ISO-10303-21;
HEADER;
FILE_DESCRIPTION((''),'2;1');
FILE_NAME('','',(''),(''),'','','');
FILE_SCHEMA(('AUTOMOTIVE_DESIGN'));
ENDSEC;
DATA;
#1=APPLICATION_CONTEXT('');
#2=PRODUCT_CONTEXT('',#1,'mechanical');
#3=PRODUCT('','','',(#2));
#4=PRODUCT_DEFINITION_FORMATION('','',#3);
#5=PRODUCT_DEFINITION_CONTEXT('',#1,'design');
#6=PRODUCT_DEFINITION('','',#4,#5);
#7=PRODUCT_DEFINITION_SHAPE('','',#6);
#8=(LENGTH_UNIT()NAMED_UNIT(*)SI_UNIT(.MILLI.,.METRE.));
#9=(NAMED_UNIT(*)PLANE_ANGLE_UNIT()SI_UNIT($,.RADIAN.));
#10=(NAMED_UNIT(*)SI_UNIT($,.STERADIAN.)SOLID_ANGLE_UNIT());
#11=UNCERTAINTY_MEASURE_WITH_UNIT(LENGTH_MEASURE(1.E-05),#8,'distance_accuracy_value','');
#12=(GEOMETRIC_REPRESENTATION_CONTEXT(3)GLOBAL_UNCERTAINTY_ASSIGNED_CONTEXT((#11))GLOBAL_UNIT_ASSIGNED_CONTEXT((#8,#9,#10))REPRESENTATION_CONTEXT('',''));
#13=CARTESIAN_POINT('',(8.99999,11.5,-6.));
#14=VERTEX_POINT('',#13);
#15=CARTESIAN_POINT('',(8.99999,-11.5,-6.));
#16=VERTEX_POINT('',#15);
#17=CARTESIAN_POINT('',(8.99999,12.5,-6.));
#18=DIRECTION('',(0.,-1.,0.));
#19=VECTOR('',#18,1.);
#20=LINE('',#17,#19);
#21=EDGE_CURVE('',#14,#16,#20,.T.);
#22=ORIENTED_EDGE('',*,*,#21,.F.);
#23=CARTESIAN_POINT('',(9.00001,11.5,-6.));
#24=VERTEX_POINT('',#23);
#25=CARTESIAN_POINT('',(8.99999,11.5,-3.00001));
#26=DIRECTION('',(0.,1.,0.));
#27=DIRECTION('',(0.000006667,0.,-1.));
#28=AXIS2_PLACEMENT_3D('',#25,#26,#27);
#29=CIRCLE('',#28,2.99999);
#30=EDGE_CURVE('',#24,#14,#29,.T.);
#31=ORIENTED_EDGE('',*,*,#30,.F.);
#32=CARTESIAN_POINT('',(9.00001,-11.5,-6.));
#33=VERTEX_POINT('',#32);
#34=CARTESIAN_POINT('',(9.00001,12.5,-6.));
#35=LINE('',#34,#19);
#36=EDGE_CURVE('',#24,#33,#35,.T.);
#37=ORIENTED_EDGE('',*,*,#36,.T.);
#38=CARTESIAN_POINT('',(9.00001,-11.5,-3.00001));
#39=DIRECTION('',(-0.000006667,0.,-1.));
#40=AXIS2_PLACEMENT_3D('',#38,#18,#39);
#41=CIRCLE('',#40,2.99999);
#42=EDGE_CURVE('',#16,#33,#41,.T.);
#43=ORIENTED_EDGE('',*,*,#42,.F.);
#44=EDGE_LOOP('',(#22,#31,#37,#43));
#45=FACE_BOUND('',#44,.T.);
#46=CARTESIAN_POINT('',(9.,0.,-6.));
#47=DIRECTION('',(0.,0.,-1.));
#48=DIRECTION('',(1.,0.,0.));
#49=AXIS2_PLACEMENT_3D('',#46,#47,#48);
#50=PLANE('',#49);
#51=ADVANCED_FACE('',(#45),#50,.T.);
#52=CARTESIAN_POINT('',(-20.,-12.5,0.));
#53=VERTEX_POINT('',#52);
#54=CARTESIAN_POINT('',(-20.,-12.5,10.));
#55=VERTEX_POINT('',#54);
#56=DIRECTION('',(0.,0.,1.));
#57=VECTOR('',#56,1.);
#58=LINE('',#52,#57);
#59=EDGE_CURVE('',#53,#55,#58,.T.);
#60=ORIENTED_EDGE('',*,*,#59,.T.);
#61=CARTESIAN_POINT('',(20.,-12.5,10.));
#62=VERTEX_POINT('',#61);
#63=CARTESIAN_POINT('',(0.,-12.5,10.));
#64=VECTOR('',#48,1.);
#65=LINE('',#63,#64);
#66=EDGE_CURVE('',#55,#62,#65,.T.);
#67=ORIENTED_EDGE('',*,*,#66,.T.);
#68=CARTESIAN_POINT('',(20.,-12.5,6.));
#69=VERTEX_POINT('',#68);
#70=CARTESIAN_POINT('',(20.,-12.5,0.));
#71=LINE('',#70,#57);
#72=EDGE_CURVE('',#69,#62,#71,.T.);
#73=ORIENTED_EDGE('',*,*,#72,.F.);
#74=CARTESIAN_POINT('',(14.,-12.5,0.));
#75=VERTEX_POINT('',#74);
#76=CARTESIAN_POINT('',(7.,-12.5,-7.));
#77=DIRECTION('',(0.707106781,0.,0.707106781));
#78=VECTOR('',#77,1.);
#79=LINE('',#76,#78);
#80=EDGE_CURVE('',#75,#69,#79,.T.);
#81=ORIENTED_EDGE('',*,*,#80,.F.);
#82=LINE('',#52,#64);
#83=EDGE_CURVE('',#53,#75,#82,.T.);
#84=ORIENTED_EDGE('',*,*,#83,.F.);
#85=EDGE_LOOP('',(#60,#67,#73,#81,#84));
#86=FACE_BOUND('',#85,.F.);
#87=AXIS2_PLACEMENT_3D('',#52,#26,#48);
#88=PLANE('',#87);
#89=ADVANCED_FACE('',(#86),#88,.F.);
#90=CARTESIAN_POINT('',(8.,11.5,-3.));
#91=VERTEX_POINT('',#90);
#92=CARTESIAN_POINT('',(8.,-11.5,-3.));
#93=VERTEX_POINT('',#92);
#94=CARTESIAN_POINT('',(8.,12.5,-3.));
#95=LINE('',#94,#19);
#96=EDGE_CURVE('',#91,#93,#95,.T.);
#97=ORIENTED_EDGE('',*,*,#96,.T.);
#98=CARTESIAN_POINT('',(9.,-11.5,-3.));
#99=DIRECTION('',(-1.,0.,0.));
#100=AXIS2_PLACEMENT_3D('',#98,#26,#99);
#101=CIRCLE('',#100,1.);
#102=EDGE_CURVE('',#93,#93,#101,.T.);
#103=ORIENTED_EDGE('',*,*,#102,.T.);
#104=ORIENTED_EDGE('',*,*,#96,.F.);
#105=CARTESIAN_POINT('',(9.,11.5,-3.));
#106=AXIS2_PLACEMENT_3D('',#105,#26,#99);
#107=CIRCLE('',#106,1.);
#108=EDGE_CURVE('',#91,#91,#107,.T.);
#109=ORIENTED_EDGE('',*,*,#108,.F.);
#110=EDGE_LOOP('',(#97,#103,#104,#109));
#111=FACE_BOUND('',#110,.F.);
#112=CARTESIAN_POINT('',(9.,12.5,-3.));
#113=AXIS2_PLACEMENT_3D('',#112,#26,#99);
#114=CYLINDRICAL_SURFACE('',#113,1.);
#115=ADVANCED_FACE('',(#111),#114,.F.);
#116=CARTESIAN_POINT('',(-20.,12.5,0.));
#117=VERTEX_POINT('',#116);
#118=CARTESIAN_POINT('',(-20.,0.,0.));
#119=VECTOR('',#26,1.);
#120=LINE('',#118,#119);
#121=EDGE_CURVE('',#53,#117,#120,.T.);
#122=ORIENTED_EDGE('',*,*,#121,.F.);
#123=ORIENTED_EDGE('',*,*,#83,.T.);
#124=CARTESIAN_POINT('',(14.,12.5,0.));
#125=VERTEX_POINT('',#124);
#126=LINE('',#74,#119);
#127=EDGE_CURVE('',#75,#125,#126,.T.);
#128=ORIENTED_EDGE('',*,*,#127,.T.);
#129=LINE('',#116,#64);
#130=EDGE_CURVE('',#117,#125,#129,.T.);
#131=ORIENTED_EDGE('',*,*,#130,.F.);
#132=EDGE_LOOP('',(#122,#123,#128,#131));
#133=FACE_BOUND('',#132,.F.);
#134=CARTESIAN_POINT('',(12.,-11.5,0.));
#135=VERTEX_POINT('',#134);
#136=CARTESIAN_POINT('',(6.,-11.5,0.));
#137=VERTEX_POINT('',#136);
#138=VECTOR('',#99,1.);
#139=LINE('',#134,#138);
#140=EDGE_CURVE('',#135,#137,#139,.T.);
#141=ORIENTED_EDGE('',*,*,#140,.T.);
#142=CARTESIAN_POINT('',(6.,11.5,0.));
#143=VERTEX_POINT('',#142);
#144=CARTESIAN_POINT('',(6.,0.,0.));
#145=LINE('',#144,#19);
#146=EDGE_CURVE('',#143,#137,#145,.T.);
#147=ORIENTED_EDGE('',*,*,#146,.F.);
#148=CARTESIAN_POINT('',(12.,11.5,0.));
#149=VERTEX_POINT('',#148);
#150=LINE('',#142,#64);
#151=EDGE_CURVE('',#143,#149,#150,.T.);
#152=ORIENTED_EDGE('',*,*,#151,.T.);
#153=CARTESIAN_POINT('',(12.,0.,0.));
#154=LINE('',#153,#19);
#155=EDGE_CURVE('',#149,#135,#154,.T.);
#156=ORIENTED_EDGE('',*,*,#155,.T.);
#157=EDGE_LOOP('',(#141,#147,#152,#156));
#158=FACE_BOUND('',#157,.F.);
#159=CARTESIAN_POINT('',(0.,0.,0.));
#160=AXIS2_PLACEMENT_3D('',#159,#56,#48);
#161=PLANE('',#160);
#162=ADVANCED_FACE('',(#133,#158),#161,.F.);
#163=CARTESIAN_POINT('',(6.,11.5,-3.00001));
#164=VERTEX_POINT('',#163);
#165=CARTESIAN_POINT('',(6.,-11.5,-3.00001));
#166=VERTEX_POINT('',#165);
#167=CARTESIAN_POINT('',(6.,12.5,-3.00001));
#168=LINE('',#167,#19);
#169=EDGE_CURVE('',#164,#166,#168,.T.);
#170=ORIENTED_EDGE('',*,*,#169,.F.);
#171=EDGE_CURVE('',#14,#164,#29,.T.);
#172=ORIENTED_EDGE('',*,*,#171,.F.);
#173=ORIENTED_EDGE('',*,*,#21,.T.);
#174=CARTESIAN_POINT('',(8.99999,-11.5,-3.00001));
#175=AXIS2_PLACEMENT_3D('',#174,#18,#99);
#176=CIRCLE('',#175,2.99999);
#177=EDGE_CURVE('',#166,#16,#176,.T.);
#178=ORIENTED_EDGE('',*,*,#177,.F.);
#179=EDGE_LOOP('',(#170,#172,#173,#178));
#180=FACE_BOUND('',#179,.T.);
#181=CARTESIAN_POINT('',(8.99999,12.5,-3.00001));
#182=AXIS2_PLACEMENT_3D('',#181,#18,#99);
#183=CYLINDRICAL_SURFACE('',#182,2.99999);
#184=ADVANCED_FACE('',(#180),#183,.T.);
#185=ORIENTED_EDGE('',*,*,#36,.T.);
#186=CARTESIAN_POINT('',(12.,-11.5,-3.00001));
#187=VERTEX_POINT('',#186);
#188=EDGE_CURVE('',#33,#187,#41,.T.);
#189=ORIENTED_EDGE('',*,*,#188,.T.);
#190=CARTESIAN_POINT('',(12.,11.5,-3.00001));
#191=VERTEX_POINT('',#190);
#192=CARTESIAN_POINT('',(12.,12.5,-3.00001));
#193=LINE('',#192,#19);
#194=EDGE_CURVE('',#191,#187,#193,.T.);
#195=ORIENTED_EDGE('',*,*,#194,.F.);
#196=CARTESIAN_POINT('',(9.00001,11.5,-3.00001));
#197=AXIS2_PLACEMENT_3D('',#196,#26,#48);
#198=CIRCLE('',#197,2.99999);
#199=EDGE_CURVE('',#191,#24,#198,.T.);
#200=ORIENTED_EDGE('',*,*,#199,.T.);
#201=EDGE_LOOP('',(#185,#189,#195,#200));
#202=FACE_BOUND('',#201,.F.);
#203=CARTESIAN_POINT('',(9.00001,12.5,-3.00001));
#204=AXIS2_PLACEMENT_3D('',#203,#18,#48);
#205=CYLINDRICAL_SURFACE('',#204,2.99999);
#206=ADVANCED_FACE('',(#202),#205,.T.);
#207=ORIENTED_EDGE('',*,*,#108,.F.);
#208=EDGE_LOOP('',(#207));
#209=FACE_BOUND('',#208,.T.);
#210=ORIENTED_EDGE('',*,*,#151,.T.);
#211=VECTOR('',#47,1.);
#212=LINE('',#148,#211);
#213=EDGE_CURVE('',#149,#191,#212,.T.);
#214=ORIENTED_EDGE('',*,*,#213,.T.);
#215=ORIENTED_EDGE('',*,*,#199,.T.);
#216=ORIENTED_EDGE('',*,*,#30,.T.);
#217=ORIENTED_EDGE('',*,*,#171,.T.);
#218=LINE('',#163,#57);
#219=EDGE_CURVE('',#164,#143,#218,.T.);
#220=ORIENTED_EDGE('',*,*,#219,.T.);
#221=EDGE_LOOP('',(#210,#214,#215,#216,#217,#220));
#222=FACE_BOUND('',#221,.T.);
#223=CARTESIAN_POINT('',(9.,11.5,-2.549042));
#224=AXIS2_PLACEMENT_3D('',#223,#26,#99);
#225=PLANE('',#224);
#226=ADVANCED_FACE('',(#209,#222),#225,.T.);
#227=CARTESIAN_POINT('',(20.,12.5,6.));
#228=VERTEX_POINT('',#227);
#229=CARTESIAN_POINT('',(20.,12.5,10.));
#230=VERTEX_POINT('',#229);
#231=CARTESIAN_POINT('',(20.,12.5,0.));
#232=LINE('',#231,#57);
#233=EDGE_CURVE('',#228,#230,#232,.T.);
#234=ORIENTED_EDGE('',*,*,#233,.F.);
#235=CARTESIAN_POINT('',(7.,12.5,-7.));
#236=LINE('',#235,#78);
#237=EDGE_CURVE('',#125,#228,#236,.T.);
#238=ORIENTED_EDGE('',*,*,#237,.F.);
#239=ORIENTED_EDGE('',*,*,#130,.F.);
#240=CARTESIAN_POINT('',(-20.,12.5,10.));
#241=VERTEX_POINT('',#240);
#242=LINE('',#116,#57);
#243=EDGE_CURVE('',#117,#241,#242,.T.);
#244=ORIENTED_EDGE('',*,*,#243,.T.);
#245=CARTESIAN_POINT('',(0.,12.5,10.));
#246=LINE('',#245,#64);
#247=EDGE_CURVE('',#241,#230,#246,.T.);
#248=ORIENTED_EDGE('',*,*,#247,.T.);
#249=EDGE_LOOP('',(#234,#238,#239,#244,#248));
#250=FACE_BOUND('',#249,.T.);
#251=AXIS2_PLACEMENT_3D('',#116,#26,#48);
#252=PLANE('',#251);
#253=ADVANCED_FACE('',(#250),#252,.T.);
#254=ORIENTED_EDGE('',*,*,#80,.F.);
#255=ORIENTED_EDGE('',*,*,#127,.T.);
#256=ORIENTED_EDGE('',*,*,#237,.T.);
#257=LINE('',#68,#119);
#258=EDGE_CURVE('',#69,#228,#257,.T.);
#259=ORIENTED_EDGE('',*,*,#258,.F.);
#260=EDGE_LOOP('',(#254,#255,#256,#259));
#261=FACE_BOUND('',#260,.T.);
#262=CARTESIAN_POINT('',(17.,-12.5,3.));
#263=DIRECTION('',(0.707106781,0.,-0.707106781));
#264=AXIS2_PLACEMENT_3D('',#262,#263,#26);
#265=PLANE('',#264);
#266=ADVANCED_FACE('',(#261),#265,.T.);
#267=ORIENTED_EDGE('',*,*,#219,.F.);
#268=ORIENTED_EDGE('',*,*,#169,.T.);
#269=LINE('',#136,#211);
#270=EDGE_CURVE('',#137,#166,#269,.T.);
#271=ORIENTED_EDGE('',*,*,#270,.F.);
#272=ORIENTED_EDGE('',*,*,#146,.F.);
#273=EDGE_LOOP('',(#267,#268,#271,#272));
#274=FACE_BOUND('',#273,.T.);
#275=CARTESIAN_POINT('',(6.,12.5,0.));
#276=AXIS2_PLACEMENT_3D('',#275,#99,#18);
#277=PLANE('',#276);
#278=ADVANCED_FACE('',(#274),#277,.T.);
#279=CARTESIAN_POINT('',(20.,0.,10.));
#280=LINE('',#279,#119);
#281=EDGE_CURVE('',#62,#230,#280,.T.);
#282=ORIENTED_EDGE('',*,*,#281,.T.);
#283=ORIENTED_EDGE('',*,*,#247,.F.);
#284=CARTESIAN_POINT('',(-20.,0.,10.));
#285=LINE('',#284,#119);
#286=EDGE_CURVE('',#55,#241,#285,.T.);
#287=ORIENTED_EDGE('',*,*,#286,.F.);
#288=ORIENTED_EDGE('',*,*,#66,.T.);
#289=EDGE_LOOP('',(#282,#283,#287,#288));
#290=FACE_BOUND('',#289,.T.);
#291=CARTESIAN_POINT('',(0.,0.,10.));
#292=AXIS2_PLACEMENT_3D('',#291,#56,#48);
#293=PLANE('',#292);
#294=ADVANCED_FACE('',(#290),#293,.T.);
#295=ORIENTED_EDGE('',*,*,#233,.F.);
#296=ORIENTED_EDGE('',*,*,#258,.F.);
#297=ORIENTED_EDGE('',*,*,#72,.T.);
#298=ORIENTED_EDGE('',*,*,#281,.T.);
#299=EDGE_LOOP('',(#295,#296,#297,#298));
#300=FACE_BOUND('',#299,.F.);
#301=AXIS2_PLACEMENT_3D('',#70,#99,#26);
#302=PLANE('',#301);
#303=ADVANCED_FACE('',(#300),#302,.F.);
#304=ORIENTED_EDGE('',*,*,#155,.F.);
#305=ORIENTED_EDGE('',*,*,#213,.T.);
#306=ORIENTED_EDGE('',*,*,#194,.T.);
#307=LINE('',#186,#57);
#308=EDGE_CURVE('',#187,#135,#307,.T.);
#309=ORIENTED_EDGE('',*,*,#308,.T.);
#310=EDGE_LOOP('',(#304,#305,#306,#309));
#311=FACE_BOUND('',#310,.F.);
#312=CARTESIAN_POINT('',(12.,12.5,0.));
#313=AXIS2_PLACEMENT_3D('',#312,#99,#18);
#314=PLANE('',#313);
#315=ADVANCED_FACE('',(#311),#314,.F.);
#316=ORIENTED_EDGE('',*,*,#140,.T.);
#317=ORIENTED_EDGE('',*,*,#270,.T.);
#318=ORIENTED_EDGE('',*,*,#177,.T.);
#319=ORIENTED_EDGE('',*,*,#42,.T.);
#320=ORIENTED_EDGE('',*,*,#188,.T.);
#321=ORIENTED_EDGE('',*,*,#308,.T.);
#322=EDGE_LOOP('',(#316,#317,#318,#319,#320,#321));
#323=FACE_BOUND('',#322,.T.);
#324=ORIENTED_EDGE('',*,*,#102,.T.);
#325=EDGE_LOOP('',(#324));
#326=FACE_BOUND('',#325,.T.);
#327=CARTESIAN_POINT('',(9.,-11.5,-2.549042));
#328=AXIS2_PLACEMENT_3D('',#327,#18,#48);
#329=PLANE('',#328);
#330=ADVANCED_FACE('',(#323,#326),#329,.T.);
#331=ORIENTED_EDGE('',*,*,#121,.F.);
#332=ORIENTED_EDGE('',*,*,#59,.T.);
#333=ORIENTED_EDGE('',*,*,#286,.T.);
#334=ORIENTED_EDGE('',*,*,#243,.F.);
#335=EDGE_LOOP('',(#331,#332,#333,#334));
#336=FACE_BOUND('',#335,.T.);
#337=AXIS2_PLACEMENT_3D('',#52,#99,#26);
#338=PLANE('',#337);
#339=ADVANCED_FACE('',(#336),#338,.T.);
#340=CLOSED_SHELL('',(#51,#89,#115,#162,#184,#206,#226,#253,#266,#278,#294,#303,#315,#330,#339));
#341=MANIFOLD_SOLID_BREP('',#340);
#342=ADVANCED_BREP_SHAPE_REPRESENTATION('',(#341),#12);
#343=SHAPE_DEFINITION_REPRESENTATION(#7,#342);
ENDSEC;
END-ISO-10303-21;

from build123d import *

# Parameters (mm, degrees)
F0_W      = 40
F0_H      = 25
F1_DEPTH  = 10
F2_W      = 6
F2_H      = 25
F3_DEPTH  = 6
F4_R      = 2.99999
F5_R      = 1
F6_DEPTH  = 30
F7_SIZE   = 6
F8_R      = 1
F9_DEPTH  = 1
F10_R     = 1
F11_DEPTH = 1


# Not quite as in the source:
# - a fillet or chamfer is up to 0.001 mm smaller than in the source, because OpenCascade refuses the exact size
# - ends of sketch curves that miss each other by under 0.0002 mm in the source are joined


with BuildPart() as f1:
    # F0 (on Top) → F1 (new body)
    with BuildSketch(Plane.XY):
        Rectangle(F0_W, F0_H)
    extrude(amount=F1_DEPTH)

    # F2 (on face) → F3 (join)
    with BuildSketch(Plane(origin=(0, 0, 0), x_dir=(1, 0, 0), z_dir=(0, 0, -1))):
        with Locations((9, 0)):
            Rectangle(F2_W, F2_H)
    extrude(amount=F3_DEPTH)

    # F4 (radius 3 in the source; OpenCascade refuses exactly that, so slightly less here)
    f4_edges = [f1.edges().sort_by_distance(p)[0] for p in [
        (6, 0, -6),
        (12, 0, -6),
    ]]
    fillet(f4_edges, radius=F4_R)

    # F5 (on face) → F6 (cut)
    with BuildSketch(Plane(origin=(0, 12.5, 0), x_dir=(-1, 0, 0), z_dir=(0, 1, 0))):
        with Locations((-9, -3)):
            Circle(F5_R)
    extrude(amount=-F6_DEPTH, mode=Mode.SUBTRACT)

    # F7
    f7_edges = [f1.edges().sort_by_distance(p)[0] for p in [
        (20, 0, 0),
    ]]
    chamfer(f7_edges, length=F7_SIZE)

    # F8 (on face) → F9 (cut)
    with BuildSketch(Plane(origin=(0, 12.5, 0), x_dir=(-1, 0, 0), z_dir=(0, 1, 0))):
        with BuildLine():
            Line((-6, -3.00001), (-6, 0))
            Line((-6, 0), (-12, 0))
            Line((-12, 0), (-12, -3.00001))
            ThreePointArc((-12, -3.00001), (-11.1213232725, -5.1213232725), (-9.00001, -6))
            ThreePointArc((-9.00001, -6), (-6.8786767275, -5.1213232725), (-6, -3.00001))
        make_face()
        with Locations((-9, -3)):
            Circle(F8_R, mode=Mode.SUBTRACT)
    extrude(amount=-F9_DEPTH, mode=Mode.SUBTRACT)

    # F10 (on face) → F11 (cut)
    with BuildSketch(Plane.XZ.offset(12.5)):
        with BuildLine():
            Line((12, 0), (6, 0))
            Line((6, 0), (6, -3.00001))
            ThreePointArc((6, -3.00001), (6.8786767275, -5.1213232725), (8.99999, -6))
            ThreePointArc((8.99999, -6), (11.1213232725, -5.1213232725), (12, -3.00001))
            Line((12, -3.00001), (12, 0))
        make_face()
        with Locations((9, -3)):
            Circle(F10_R, mode=Mode.SUBTRACT)
    extrude(amount=-F11_DEPTH, mode=Mode.SUBTRACT)


solid = f1.part
